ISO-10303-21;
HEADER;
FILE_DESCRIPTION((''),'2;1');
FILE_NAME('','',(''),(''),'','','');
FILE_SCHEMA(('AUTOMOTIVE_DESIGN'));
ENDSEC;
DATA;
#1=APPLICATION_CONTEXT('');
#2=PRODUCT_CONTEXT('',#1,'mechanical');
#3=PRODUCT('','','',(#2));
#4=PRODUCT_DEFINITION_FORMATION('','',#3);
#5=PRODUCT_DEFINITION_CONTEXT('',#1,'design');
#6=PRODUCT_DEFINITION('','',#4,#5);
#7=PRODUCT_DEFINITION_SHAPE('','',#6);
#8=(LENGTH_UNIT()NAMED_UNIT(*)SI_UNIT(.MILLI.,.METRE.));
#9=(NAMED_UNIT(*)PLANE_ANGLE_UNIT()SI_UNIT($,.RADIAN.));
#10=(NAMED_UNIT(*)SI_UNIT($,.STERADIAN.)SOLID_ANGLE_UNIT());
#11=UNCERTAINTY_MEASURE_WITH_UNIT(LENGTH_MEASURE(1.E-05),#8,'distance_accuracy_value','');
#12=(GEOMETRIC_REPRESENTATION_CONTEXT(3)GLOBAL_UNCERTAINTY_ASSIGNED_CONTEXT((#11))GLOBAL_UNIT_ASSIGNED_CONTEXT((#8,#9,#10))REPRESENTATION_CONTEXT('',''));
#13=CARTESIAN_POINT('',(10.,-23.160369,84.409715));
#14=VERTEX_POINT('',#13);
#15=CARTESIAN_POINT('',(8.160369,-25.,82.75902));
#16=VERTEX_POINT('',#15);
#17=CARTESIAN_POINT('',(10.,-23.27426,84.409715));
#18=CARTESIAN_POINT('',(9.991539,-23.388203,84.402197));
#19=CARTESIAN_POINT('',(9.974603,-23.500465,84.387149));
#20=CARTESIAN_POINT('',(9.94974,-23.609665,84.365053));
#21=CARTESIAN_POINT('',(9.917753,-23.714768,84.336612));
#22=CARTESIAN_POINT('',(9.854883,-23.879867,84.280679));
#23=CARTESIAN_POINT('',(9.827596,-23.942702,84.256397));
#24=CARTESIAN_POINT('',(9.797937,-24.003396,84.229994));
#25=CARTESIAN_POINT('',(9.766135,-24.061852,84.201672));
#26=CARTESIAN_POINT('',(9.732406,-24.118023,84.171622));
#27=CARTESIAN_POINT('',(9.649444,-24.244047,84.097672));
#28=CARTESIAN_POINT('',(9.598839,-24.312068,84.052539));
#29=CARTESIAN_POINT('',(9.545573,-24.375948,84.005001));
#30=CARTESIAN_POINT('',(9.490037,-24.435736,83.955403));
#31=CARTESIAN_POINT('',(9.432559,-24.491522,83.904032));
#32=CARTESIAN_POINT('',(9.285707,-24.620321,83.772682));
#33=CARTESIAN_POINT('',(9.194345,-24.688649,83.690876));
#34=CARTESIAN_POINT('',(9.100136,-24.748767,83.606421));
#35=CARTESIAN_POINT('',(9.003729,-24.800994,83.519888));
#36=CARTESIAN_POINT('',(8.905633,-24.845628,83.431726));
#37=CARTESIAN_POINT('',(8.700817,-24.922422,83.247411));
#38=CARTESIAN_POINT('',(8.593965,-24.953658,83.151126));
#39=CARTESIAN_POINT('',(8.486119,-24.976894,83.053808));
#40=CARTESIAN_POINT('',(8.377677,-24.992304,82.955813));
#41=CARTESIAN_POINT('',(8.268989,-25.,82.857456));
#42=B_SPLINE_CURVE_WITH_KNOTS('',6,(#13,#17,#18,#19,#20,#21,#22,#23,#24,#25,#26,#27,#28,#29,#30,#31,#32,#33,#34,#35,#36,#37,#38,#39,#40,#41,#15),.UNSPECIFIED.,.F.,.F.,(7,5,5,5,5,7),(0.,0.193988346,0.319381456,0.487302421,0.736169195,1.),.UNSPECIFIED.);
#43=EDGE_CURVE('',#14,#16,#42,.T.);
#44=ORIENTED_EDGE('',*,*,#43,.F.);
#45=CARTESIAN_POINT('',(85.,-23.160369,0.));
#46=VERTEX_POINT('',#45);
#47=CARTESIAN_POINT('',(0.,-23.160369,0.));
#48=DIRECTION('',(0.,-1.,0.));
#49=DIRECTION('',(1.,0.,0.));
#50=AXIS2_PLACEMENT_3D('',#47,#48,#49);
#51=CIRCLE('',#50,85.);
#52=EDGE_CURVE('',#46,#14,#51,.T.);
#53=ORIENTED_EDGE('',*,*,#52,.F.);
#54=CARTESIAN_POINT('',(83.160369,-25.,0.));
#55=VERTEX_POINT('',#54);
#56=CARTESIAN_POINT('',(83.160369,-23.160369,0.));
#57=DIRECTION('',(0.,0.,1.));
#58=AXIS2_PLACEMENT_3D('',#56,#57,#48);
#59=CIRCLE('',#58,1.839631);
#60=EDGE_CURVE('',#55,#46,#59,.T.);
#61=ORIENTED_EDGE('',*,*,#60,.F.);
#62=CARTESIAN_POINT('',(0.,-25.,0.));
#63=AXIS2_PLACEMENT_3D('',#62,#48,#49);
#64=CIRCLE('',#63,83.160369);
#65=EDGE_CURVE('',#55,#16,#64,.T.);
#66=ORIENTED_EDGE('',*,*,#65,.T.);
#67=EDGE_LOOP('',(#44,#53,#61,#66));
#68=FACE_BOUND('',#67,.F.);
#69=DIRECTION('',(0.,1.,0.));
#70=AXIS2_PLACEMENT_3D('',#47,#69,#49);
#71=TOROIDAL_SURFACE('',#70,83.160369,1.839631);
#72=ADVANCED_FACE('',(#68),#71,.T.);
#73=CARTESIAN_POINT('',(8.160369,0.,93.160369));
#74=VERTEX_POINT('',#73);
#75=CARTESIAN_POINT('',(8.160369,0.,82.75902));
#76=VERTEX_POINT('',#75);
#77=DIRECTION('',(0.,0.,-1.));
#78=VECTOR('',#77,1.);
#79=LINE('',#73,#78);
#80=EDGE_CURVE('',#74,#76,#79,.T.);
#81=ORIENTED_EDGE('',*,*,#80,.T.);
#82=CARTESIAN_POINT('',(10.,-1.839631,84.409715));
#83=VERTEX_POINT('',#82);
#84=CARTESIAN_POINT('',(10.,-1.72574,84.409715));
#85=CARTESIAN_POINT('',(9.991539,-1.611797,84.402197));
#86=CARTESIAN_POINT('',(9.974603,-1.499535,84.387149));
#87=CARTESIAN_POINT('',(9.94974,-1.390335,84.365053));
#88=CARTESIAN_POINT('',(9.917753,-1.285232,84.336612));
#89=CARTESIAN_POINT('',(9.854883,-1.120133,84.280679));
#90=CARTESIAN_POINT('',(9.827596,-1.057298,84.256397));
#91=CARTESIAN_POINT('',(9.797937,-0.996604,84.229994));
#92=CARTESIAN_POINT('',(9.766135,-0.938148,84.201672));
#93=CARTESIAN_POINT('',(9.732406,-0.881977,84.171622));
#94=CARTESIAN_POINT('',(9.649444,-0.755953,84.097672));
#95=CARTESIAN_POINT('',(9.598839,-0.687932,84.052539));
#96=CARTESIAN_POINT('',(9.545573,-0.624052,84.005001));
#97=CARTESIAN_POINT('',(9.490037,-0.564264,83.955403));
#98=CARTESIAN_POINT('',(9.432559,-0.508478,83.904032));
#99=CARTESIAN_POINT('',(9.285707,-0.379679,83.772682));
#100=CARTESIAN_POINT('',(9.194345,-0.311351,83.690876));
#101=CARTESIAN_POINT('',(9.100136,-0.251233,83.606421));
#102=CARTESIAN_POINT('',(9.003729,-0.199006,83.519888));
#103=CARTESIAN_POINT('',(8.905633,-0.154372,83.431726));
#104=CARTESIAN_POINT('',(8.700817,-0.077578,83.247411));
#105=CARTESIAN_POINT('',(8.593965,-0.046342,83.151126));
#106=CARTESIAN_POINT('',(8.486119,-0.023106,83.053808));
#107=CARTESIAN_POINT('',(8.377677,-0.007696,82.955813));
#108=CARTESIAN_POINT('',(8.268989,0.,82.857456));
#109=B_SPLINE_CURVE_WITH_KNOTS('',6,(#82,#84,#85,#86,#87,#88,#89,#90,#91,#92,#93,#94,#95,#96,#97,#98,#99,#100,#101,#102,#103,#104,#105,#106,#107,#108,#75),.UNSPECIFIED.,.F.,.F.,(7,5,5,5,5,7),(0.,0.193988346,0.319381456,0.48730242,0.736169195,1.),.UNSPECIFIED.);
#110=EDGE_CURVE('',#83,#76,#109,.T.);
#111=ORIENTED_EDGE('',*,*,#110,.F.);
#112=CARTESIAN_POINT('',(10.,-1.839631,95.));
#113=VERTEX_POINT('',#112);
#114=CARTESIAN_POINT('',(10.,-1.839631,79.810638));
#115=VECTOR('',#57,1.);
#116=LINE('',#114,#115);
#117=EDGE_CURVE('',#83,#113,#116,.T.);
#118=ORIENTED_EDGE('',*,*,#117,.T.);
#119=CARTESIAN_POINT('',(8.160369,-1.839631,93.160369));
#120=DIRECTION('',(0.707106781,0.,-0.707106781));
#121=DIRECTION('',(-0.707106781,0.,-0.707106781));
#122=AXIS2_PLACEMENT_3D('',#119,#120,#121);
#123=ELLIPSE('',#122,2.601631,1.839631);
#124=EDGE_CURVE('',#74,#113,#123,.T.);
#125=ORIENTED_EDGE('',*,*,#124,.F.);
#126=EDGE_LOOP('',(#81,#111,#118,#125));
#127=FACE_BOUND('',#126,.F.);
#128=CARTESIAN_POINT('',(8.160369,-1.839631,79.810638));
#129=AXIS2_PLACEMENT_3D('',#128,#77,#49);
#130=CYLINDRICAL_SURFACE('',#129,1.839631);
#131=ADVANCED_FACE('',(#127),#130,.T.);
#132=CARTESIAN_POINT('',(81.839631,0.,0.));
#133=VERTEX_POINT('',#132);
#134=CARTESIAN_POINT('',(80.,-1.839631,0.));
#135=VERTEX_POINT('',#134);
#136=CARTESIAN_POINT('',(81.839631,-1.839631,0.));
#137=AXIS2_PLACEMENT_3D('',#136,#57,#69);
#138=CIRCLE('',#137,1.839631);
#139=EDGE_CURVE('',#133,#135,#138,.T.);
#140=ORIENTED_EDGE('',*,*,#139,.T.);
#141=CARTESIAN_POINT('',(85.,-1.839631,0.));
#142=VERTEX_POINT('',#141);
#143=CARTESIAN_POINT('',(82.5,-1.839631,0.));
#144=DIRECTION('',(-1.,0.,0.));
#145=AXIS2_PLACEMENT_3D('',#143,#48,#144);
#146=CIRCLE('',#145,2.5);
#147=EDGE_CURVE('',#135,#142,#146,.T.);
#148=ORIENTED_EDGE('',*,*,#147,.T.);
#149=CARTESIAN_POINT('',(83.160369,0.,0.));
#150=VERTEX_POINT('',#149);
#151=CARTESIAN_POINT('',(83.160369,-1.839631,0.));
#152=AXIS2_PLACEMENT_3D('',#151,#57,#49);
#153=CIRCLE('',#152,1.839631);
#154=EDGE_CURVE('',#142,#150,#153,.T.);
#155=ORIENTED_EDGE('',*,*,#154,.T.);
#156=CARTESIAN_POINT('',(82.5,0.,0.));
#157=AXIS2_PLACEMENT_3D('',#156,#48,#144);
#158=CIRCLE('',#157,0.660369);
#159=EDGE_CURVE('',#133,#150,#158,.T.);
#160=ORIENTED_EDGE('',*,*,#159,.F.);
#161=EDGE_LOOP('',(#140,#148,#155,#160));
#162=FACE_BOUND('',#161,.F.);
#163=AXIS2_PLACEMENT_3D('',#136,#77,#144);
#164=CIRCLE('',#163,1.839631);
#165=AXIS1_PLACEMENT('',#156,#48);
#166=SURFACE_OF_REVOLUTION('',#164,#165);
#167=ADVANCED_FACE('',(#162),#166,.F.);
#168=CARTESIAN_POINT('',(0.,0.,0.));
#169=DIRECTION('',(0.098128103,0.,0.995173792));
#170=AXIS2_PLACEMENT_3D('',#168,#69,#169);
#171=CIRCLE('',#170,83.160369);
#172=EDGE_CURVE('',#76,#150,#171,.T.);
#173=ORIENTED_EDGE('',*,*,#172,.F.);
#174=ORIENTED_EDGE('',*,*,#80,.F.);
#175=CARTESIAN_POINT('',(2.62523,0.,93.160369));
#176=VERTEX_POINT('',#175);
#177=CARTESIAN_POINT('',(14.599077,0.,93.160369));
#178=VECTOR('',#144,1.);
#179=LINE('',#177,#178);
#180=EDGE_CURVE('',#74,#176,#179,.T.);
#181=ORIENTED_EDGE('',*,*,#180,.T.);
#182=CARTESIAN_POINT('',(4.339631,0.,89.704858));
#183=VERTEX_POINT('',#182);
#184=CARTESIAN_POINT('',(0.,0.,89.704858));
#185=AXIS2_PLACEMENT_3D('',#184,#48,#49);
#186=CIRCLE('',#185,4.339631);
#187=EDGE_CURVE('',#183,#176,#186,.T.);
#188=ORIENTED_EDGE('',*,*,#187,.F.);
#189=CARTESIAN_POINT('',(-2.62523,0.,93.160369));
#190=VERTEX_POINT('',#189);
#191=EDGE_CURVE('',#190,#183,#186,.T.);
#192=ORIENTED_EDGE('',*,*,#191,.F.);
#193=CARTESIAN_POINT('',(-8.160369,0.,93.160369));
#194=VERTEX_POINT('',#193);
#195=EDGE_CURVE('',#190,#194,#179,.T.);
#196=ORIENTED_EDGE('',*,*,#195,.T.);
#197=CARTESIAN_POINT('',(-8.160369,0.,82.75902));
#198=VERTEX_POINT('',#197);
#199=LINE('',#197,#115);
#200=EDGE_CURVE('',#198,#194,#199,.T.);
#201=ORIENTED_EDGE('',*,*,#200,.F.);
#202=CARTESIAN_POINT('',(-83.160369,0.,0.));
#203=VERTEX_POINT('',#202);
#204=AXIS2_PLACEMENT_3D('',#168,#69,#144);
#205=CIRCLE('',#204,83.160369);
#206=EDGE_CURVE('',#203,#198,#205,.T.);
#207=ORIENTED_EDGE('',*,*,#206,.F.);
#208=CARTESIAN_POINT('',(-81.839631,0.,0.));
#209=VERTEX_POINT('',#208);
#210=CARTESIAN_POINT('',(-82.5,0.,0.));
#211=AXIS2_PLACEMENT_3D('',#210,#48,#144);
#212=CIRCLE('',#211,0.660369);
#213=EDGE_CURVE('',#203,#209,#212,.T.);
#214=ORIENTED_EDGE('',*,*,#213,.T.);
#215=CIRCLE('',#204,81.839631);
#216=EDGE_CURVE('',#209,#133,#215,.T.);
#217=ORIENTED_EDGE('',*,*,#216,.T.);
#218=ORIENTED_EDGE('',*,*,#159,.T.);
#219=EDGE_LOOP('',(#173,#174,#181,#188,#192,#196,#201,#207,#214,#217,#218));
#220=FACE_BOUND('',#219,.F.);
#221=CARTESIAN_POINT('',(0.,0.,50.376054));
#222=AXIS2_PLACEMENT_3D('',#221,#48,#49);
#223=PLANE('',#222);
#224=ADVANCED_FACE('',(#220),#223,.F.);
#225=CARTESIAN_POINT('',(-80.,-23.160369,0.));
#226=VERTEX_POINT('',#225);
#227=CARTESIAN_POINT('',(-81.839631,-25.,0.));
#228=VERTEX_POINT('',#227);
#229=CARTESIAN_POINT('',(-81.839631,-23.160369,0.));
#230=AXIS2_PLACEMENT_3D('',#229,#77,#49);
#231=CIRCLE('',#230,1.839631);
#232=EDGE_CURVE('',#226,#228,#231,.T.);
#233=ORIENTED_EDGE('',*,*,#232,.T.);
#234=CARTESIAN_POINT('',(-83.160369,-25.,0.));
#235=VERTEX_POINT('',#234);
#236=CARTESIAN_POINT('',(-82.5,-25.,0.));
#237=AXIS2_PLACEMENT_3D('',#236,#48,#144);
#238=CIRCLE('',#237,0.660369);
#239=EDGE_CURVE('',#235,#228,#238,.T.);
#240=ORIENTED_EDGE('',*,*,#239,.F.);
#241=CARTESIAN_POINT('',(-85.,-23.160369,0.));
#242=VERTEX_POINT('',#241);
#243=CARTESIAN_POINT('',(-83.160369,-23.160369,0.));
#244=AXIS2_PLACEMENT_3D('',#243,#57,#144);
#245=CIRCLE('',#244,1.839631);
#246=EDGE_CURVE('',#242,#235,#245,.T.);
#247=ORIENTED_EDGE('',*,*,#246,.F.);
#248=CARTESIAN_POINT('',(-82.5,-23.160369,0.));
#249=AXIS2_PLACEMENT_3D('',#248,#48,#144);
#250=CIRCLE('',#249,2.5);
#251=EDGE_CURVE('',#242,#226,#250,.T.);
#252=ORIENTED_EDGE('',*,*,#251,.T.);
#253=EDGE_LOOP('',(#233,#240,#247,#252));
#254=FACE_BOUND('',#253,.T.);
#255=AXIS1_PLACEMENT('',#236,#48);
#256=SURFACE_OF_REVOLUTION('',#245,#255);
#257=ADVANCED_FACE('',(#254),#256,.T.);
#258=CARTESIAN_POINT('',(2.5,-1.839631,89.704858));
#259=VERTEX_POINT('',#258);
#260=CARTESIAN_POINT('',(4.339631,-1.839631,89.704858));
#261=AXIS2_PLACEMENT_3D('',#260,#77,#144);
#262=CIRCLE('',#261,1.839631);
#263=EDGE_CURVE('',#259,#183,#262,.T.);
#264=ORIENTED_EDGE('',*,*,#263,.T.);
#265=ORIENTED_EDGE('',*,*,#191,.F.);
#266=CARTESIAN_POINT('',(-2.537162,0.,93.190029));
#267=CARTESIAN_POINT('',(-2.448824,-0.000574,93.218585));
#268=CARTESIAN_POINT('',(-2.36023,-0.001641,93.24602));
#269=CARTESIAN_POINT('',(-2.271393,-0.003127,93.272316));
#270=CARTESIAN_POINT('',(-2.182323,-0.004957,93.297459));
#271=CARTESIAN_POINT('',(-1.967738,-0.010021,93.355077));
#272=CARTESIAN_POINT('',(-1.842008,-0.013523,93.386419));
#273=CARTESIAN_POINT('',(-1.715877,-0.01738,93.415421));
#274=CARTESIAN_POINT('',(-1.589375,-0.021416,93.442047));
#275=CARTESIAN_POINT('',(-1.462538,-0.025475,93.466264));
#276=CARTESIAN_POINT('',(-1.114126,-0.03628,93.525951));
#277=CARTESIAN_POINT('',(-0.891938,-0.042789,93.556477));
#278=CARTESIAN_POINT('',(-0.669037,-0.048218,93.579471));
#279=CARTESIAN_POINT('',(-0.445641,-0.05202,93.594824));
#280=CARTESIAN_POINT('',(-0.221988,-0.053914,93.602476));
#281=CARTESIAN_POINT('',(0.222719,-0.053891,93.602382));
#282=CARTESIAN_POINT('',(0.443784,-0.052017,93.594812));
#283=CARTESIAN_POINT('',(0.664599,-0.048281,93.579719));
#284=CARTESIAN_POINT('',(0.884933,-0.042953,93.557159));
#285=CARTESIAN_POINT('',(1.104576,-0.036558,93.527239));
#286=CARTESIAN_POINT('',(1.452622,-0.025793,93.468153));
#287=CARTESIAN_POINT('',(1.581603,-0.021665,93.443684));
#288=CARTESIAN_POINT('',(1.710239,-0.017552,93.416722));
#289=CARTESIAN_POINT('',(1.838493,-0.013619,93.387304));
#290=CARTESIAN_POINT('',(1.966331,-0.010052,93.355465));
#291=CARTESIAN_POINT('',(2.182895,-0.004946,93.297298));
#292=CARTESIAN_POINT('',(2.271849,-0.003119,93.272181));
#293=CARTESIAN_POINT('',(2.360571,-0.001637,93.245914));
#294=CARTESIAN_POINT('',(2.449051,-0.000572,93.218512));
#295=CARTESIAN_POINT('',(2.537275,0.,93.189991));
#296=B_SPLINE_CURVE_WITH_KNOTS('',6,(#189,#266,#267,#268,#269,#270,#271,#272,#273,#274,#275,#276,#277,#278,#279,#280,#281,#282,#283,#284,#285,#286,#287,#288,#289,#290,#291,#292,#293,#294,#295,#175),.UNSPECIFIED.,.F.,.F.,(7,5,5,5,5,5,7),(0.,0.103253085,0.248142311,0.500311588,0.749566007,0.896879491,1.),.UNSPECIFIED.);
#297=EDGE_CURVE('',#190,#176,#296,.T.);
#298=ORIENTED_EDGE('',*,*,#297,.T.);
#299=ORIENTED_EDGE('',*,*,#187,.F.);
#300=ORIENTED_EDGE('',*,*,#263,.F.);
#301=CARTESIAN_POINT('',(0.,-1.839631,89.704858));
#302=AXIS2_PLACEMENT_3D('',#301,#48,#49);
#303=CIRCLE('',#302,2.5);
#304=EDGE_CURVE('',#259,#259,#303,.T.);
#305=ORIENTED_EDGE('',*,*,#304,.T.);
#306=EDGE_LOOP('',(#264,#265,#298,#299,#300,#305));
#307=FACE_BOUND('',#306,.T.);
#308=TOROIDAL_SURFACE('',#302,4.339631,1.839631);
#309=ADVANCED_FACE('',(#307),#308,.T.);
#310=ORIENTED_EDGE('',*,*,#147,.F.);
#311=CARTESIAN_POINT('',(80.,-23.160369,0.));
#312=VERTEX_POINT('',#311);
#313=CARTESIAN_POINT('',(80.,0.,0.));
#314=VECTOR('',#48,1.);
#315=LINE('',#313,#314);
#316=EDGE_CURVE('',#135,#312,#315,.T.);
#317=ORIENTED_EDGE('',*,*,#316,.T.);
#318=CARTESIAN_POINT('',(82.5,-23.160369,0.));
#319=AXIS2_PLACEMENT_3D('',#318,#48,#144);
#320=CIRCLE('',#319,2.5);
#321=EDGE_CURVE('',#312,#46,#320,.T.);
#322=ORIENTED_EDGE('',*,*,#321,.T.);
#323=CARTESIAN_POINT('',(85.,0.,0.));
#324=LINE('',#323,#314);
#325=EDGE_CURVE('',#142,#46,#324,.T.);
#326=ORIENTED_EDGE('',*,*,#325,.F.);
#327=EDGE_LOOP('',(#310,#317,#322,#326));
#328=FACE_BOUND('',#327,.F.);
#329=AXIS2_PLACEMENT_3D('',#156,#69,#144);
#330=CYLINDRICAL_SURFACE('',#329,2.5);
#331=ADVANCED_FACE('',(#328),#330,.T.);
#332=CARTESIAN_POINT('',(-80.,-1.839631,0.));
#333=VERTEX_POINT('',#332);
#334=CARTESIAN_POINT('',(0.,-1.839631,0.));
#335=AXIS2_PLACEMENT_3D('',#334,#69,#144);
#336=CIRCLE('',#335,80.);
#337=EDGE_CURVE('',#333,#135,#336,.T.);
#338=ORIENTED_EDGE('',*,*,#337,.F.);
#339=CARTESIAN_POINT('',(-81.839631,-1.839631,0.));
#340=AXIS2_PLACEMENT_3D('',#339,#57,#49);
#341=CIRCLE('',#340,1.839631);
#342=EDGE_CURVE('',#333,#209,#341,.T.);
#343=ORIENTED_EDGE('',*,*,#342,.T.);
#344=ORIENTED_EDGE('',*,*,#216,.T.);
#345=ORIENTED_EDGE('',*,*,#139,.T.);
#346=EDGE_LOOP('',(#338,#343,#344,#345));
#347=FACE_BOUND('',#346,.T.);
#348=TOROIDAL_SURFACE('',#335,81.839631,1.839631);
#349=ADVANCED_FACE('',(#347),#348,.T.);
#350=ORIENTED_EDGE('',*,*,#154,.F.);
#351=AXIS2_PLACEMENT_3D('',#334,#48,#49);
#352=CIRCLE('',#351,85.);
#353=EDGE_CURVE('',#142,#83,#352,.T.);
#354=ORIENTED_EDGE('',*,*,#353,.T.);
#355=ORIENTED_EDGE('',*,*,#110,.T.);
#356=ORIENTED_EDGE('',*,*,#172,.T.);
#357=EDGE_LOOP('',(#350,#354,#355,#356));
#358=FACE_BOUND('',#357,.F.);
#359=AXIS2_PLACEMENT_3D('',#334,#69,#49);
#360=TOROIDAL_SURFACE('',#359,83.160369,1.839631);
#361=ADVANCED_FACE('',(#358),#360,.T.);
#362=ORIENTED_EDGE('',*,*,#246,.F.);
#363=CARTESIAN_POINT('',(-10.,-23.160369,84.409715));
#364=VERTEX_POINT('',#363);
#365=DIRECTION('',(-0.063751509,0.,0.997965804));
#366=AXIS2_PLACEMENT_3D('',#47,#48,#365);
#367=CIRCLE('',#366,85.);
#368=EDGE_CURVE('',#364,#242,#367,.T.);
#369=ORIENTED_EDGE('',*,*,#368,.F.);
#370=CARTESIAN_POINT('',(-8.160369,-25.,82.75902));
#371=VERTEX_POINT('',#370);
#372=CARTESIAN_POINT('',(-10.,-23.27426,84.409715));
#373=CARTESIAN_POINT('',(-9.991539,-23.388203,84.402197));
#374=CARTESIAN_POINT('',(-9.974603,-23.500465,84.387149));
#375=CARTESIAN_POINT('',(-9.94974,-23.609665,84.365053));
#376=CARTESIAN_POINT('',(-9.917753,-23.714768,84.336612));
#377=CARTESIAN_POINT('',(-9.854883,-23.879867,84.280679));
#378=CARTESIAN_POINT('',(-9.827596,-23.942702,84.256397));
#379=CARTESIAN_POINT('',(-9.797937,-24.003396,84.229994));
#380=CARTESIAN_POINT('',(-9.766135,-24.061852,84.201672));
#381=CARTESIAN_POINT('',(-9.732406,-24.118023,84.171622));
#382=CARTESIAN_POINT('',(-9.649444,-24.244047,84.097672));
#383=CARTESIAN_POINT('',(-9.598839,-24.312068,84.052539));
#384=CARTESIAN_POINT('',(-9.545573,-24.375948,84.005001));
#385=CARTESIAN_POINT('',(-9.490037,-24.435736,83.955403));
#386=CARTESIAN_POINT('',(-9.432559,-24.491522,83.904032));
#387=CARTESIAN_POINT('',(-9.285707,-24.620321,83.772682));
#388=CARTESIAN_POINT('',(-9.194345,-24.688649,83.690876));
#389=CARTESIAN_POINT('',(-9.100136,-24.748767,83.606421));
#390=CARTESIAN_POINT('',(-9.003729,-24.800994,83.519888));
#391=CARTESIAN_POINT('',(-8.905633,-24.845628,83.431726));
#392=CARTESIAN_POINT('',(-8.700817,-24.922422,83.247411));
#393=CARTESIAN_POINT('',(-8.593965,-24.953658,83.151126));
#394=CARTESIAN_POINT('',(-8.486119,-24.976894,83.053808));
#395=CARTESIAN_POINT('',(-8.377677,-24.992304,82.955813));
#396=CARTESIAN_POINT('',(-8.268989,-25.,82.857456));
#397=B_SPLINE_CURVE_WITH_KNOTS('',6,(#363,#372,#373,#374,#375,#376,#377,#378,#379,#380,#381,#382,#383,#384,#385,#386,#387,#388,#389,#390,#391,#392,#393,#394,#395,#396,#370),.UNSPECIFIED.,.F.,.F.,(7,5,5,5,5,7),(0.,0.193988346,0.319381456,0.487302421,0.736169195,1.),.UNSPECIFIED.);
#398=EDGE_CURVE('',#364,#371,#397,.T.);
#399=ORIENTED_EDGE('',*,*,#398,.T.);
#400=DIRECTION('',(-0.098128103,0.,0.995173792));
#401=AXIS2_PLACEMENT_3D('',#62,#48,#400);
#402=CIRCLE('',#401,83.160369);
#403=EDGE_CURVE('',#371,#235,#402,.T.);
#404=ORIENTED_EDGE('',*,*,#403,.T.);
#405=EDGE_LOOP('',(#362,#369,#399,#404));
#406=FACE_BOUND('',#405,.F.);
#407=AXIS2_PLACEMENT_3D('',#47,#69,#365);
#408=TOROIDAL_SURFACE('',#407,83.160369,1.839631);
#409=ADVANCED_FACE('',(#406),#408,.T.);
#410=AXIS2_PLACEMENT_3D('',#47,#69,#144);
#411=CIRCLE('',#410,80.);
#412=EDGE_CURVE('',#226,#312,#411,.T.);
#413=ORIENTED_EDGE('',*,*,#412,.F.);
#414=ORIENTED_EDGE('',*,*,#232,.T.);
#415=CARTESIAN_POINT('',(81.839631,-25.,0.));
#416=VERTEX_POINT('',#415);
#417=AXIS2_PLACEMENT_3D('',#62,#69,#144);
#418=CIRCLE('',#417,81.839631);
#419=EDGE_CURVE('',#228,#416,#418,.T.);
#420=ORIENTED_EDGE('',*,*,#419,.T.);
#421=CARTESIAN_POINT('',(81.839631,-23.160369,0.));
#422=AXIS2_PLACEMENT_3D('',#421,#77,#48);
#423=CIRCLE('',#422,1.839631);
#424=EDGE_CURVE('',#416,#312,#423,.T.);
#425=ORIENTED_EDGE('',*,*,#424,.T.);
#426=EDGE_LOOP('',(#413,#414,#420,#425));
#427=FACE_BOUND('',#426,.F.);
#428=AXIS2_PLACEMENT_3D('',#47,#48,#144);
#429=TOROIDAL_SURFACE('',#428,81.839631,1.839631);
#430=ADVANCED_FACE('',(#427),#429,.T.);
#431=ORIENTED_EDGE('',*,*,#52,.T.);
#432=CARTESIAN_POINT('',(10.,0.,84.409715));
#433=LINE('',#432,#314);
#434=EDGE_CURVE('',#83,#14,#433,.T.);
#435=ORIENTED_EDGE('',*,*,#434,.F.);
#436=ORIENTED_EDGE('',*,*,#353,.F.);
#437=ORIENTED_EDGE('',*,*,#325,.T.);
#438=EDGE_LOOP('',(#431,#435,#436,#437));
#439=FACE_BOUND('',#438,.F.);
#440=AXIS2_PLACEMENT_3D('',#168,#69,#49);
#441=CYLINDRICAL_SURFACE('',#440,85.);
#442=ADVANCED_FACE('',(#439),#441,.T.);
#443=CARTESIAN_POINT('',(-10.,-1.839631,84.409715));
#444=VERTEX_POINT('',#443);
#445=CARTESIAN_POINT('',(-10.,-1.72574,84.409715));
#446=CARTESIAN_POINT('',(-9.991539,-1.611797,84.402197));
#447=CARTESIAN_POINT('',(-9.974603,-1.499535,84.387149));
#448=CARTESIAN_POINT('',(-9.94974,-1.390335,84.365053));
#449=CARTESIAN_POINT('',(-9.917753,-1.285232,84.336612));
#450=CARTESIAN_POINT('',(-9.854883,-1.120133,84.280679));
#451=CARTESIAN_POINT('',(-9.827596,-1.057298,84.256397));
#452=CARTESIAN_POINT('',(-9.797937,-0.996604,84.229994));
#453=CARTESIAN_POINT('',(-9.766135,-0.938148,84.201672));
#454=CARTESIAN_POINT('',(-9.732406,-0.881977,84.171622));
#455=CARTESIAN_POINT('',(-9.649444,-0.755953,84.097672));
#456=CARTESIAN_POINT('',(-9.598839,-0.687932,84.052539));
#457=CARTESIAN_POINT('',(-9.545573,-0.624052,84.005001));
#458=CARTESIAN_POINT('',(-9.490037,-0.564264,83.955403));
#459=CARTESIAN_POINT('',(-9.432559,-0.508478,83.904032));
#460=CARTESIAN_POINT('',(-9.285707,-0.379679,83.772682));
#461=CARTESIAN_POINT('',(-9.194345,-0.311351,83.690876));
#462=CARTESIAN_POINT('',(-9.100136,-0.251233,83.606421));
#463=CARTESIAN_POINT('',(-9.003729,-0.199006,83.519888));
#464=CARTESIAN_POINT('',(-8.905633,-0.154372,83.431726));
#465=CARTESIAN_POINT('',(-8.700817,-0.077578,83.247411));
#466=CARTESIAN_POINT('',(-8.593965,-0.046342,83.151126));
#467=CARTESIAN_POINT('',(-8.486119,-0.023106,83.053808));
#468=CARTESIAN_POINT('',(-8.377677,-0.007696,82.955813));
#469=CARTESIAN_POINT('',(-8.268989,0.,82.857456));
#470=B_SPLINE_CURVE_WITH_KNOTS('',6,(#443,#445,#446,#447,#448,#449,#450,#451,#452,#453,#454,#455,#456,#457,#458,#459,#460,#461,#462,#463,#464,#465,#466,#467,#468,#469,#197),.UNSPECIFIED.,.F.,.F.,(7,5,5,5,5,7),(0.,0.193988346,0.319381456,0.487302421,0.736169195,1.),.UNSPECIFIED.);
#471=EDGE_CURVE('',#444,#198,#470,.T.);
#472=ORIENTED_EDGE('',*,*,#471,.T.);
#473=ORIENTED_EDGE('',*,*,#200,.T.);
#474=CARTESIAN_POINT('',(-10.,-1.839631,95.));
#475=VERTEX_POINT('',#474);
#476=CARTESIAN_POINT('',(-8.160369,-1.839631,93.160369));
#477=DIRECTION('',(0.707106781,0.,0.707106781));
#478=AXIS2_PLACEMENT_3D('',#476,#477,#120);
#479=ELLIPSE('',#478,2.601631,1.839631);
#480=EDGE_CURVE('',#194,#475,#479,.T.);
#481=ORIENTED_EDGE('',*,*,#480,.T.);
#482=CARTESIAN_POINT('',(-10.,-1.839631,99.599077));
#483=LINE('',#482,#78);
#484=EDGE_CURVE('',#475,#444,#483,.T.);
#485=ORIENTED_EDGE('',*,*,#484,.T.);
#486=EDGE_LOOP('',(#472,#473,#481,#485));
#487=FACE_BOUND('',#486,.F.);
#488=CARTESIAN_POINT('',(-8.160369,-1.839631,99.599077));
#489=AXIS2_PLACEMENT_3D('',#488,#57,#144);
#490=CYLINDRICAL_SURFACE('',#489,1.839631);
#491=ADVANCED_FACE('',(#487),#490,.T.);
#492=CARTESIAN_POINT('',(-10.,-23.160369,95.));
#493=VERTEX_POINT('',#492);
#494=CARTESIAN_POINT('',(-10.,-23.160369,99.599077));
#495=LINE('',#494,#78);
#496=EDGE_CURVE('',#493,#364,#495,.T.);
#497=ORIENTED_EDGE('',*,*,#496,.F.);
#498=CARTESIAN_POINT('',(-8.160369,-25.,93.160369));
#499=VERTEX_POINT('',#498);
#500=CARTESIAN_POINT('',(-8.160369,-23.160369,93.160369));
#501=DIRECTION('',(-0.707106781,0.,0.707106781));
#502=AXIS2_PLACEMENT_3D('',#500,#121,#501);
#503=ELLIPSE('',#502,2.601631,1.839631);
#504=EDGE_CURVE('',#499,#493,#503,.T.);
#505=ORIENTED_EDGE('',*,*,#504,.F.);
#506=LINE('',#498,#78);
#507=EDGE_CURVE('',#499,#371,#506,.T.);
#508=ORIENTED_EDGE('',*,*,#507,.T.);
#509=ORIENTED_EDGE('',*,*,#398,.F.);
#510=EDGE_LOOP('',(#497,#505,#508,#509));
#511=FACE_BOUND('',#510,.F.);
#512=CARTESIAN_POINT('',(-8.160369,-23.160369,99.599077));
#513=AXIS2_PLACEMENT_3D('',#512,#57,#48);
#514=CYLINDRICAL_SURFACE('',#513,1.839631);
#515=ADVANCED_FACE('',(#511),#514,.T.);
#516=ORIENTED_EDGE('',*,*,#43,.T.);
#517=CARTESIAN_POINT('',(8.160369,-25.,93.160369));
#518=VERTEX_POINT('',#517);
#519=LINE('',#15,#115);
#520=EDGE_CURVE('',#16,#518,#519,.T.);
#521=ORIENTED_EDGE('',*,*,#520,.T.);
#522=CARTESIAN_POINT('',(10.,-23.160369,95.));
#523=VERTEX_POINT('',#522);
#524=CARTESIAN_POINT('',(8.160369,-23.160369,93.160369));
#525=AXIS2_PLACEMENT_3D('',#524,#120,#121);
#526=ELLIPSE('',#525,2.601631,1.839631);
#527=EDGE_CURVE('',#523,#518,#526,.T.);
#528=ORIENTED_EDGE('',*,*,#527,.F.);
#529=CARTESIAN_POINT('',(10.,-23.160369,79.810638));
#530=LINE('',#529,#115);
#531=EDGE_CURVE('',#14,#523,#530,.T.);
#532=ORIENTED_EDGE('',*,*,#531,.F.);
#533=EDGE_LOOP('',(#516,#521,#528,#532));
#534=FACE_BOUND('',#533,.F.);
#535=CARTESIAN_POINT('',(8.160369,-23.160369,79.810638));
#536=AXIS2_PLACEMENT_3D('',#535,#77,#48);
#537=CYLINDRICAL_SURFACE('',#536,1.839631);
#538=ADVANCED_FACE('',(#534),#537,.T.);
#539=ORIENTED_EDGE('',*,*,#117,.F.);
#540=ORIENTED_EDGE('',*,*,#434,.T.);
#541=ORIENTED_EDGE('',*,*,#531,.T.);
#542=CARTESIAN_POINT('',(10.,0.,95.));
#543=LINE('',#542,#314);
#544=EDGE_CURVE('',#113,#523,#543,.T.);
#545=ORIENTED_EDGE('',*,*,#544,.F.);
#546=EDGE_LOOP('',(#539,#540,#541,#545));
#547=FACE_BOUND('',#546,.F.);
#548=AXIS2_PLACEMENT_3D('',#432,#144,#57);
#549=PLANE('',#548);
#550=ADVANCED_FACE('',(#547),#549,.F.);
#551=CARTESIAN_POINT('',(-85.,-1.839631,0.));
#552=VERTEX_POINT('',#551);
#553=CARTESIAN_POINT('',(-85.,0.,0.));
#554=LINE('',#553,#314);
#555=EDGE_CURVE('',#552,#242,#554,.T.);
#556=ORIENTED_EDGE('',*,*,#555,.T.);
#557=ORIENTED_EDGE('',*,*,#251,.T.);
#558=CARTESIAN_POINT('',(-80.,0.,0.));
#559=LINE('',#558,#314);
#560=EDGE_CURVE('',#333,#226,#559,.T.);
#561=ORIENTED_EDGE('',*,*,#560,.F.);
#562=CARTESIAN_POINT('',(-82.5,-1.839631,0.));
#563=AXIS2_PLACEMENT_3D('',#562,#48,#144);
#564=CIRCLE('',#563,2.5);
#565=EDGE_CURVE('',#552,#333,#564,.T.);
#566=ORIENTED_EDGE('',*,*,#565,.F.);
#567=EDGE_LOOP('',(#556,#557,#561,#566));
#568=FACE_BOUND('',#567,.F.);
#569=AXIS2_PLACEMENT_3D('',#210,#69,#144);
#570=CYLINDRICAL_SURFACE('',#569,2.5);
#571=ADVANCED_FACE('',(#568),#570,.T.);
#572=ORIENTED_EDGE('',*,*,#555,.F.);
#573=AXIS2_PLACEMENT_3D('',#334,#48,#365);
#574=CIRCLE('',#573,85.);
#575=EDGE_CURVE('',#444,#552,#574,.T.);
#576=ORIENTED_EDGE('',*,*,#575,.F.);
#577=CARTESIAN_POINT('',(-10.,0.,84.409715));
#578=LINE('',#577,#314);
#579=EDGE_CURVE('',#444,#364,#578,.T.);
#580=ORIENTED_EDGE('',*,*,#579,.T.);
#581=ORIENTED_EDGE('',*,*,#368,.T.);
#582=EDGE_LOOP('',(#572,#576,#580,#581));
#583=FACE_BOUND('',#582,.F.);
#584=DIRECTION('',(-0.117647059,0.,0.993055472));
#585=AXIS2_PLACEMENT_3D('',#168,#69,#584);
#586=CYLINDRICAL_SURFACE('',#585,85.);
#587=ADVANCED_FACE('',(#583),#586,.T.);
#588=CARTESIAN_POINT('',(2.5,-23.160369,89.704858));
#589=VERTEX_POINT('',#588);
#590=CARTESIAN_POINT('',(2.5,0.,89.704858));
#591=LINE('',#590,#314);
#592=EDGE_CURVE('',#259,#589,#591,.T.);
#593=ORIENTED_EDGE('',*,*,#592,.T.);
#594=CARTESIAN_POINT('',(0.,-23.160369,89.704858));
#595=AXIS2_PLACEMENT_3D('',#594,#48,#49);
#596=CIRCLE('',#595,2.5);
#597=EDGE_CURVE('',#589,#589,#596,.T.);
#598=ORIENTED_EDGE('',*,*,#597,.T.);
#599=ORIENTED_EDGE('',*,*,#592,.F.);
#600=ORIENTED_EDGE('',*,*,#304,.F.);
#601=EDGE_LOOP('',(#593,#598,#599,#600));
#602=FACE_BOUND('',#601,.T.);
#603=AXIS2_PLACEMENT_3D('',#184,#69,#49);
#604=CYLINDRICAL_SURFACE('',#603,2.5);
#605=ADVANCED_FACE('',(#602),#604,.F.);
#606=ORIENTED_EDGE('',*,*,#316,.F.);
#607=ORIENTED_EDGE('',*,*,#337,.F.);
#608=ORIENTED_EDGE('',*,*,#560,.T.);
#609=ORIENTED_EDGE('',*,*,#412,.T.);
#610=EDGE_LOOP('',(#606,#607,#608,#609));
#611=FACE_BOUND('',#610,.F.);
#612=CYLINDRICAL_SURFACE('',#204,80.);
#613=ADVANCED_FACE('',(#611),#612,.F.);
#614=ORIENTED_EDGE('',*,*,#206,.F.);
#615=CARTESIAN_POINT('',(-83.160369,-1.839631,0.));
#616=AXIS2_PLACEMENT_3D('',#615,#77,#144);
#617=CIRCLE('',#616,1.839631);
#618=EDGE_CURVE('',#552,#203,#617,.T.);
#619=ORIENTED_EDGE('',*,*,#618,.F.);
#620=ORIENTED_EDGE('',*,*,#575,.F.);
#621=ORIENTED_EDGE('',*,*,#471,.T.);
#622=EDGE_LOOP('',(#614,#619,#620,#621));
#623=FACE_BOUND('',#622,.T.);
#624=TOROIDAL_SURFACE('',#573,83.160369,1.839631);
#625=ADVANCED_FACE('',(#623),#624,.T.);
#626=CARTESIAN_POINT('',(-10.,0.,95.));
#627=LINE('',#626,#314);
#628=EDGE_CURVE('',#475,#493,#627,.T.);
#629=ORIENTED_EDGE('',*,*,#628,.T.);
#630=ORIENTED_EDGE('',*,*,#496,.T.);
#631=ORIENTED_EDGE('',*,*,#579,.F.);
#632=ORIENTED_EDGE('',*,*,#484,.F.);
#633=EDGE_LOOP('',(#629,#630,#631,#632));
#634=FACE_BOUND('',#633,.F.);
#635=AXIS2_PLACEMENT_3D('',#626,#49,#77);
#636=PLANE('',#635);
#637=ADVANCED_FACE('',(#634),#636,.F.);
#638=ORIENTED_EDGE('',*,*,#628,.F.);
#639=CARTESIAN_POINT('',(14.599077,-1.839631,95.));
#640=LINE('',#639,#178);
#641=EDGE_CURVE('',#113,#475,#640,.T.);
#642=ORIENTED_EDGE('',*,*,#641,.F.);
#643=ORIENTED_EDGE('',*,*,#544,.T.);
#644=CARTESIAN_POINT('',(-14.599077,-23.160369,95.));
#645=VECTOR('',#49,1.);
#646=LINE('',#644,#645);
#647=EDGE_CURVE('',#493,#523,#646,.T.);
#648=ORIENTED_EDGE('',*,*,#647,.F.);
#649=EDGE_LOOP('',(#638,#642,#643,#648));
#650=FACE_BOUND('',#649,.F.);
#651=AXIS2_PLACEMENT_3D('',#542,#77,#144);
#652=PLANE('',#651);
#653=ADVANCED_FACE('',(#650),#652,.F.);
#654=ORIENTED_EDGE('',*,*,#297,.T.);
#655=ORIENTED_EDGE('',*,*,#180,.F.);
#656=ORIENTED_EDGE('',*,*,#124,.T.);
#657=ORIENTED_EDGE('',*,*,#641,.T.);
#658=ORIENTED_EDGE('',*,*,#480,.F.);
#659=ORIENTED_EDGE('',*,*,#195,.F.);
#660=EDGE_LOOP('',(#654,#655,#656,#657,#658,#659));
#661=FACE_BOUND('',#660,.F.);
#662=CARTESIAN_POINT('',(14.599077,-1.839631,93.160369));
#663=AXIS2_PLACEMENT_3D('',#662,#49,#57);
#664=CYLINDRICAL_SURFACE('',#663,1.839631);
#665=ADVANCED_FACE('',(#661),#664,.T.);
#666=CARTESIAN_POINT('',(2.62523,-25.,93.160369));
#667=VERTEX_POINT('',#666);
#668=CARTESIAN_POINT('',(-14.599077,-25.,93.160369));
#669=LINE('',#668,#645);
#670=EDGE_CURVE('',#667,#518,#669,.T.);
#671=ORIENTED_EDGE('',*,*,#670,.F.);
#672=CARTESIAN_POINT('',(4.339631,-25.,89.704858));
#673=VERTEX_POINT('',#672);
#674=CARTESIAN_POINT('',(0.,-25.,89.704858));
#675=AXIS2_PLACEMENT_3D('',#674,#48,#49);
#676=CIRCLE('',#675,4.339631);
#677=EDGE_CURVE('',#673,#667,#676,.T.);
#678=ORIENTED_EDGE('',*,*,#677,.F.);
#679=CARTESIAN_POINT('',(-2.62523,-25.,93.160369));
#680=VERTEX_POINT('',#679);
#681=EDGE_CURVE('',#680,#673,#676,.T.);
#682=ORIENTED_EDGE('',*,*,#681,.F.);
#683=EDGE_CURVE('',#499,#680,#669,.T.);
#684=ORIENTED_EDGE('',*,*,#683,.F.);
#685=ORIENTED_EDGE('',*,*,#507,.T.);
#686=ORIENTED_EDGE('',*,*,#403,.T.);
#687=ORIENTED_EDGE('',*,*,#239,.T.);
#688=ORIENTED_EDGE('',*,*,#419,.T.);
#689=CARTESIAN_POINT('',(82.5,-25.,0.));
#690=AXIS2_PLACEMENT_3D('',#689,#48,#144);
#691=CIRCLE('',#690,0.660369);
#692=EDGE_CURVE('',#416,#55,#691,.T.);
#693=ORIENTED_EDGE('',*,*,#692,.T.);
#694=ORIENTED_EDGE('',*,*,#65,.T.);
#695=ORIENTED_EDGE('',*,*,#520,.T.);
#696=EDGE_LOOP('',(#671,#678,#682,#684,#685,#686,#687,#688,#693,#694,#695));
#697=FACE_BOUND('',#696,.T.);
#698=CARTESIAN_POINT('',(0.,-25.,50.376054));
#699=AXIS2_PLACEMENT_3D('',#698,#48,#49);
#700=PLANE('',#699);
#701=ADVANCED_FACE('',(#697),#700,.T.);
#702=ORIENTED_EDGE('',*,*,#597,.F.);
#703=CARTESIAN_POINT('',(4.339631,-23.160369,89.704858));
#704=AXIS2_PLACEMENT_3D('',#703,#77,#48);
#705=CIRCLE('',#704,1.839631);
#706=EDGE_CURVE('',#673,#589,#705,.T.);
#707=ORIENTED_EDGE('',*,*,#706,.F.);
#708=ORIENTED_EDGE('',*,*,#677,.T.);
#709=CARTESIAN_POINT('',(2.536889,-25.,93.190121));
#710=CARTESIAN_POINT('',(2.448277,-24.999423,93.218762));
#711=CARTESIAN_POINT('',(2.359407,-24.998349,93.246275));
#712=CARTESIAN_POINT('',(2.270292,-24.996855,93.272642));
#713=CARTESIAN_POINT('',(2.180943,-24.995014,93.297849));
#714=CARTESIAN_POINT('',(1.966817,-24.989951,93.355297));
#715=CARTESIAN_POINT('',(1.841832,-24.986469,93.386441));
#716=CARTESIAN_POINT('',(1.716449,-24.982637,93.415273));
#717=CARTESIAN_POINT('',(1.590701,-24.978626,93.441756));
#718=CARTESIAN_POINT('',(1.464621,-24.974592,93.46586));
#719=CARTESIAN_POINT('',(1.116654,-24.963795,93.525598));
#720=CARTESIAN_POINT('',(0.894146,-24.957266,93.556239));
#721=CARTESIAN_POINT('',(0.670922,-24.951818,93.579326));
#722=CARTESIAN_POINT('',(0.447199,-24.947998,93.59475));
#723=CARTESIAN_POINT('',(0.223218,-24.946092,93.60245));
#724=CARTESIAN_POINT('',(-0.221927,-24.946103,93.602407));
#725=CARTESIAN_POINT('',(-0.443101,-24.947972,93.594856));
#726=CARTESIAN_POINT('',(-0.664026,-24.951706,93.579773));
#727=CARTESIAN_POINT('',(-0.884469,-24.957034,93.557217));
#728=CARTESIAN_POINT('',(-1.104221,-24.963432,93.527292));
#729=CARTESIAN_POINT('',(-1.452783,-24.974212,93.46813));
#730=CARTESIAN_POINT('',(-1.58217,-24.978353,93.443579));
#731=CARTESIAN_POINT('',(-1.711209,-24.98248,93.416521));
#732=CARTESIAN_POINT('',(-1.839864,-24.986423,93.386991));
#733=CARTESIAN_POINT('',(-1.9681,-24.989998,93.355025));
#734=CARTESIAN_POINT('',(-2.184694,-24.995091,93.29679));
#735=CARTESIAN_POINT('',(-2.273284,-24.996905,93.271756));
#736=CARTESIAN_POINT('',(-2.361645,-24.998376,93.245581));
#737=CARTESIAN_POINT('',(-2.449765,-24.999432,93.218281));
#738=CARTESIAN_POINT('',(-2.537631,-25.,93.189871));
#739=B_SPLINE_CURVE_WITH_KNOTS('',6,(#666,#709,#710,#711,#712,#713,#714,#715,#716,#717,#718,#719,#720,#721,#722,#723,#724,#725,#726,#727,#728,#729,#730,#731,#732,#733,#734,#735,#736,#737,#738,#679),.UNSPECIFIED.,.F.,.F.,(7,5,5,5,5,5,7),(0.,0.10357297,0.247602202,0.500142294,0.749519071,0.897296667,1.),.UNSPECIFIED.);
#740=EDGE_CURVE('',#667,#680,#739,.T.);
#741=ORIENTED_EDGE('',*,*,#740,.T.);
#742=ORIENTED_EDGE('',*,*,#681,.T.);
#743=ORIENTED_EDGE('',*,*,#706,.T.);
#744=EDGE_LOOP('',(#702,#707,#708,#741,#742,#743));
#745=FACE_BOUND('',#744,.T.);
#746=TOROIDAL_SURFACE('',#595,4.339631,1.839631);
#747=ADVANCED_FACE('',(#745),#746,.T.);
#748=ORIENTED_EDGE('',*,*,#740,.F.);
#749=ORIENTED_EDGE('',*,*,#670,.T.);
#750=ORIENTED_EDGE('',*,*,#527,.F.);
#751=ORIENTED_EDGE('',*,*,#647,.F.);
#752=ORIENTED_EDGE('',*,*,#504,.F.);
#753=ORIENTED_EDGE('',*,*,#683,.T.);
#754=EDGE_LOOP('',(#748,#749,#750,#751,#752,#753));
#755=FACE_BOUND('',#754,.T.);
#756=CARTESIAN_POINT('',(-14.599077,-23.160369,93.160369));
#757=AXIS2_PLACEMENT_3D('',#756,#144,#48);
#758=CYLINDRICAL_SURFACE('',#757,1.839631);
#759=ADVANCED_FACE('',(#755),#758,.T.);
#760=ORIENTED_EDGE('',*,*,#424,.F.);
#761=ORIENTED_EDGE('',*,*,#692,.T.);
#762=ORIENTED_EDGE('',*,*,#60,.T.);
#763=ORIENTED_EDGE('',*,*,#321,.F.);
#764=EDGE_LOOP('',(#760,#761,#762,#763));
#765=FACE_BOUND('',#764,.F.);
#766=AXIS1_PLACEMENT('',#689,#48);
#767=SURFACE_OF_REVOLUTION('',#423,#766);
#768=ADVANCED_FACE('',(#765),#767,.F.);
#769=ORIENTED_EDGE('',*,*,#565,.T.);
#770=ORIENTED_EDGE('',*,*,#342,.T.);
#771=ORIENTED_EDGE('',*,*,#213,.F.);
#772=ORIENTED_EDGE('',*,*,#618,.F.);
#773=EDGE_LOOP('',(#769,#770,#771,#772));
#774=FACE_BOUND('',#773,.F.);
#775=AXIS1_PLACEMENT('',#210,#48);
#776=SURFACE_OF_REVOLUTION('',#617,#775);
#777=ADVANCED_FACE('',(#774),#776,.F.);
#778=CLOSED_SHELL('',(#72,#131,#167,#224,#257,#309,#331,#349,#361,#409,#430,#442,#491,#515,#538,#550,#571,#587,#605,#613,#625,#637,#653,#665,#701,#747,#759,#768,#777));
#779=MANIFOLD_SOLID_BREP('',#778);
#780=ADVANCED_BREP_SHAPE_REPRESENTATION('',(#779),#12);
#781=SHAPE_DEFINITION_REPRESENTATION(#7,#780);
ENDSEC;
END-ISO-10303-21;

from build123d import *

# Parameters (mm, degrees)
F0_R          = 2.5
F1_DEPTH      = 25
F2_T3_ANGLE   = 180
F2_T6_ANGLE   = 180
F2_T9_ANGLE   = 180
F2_T12_ANGLE  = 86.3448287996
F2_T16_DEPTH  = 19.788438592
F2_S17_R      = 85
F2_T18_DEPTH  = 11
F2_T21_DEPTH  = 29.1981536726
F2_T24_DEPTH  = 19.788438592
F2_S25_R      = 85
F2_T26_DEPTH  = 11
F2_T29_ANGLE  = 86.3448287996
F2_T36_ANGLE  = 180
F2_T39_ANGLE  = 180
F2_T42_ANGLE  = 180
F2_T45_ANGLE  = 86.3448287996
F2_T49_DEPTH  = 19.788438592
F2_S50_R      = 85
F2_T51_DEPTH  = 11
F2_T54_DEPTH  = 29.1981536726
F2_T57_DEPTH  = 19.788438592
F2_S58_R      = 85
F2_T59_DEPTH  = 11
F2_T62_ANGLE  = 86.3448287996
F2_T70_ANGLE  = 86.3448287996
F2_T74_DEPTH  = 19.788438592
F2_S75_R      = 85
F2_T76_DEPTH  = 11
F2_T81_DEPTH  = 19.788438592
F2_S82_R      = 85
F2_T83_DEPTH  = 11
F2_T86_ANGLE  = 86.3448287996
F2_T92_DEPTH  = 19.788438592
F2_S93_R      = 85
F2_T94_DEPTH  = 11
F2_T97_ANGLE  = 86.3448287996
F2_T103_DEPTH = 19.788438592
F2_S104_R     = 85
F2_T105_DEPTH = 11
F2_T108_ANGLE = 86.3448287996


# Not quite as in the source:
# - a fillet or chamfer that OpenCascade refuses, or shapes differently, is made with other operations: its cross-section is extruded or revolved along the edge and cut away or added


with BuildPart() as f1:
    # F0 (on Front) → F1 (new body)
    with BuildSketch(Plane.XZ):
        with BuildLine():
            ThreePointArc((-80, 0), (0, 80), (80, 0))
            ThreePointArc((80, 0), (82.5, -2.5), (85, 0))
            ThreePointArc((85, 0), (63.5413251357, 56.4579489532), (10, 84.4097150807))
            Line((10, 84.4097150807), (10, 95))
            Line((10, 95), (0, 95))
            Line((0, 95), (-10, 95))
            Line((-10, 95), (-10, 84.4097150807))
            ThreePointArc((-10, 84.4097150807), (-63.5413251357, 56.4579489532), (-85, 0))
            ThreePointArc((-85, 0), (-82.5, -2.5), (-80, 0))
        make_face()
        with Locations((0, 89.7048575403)):
            Circle(F0_R, mode=Mode.SUBTRACT)
    extrude(amount=F1_DEPTH)

    # F2: fillet of radius 1.8396307345 on 18 edges, made by hand


with BuildPart() as f2_tool1:
    # F2_s2 → F2_t3 (revolve)
    with BuildSketch(Plane.XY):
        with BuildLine():
            ThreePointArc((-85, -23.1603692655), (-84.4611846327, -24.4611846327), (-83.1603692655, -25))
            Line((-83.1603692655, -25), (-85, -25))
            Line((-85, -25), (-85, -23.1603692655))
        make_face()
    revolve(axis=Axis((-82.5, -25, 0), (0, -1, 0)), revolution_arc=F2_T3_ANGLE)


with BuildPart() as f2_tool4:
    # F2_s5 → F2_t6 (revolve)
    with BuildSketch(Plane.XY):
        with BuildLine():
            ThreePointArc((-81.8396307345, -25), (-80.5388153673, -24.4611846327), (-80, -23.1603692655))
            Line((-80, -23.1603692655), (-80, -25))
            Line((-80, -25), (-81.8396307345, -25))
        make_face()
    revolve(axis=Axis((0, -25, 0), (0, 1, 0)), revolution_arc=F2_T6_ANGLE)


with BuildPart() as f2_tool7:
    # F2_s8 → F2_t9 (revolve)
    with BuildSketch(Plane.XY):
        with BuildLine():
            ThreePointArc((81.8396307345, -25), (80.5388153673, -24.4611846327), (80, -23.1603692655))
            Line((80, -23.1603692655), (80, -25))
            Line((80, -25), (81.8396307345, -25))
        make_face()
    revolve(axis=Axis((82.5, -25, 0), (0, -1, 0)), revolution_arc=F2_T9_ANGLE)


with BuildPart() as f2_tool10:
    # F2_s11 → F2_t12 (revolve)
    with BuildSketch(Plane.XY):
        with BuildLine():
            ThreePointArc((83.1603692655, -25), (84.4611846327, -24.4611846327), (85, -23.1603692655))
            Line((85, -23.1603692655), (85, -25))
            Line((85, -25), (83.1603692655, -25))
        make_face()
    revolve(axis=Axis((0, -25, 0), (0, -1, 0)), revolution_arc=F2_T12_ANGLE)

    split(bisect_by=Plane.YZ.offset(10), keep=Keep.TOP)


with BuildPart() as f2_tool14:
    # F2_s15 → F2_t16 (new body)
    with BuildSketch(Plane.XY.offset(79.8106382443)):
        with BuildLine():
            ThreePointArc((8.1603692655, -25), (9.4611846327, -24.4611846327), (10, -23.1603692655))
            Line((10, -23.1603692655), (10, -25))
            Line((10, -25), (8.1603692655, -25))
        make_face()
    extrude(amount=F2_T16_DEPTH)

    # F2_s17 → F2_t18 (cut, symmetric)
    with BuildSketch(Plane.XZ.offset(24.1)):
        Circle(F2_S17_R)
    extrude(amount=F2_T18_DEPTH, both=True, mode=Mode.SUBTRACT)


with BuildPart() as f2_tool19:
    # F2_s20 → F2_t21 (new body)
    with BuildSketch(Plane.YZ.offset(-14.5990768363)):
        with BuildLine():
            ThreePointArc((-25, 93.1603692655), (-24.4611846327, 94.4611846327), (-23.1603692655, 95))
            Line((-23.1603692655, 95), (-25, 95))
            Line((-25, 95), (-25, 93.1603692655))
        make_face()
    extrude(amount=F2_T21_DEPTH)


with BuildPart() as f2_tool22:
    # F2_s23 → F2_t24 (new body)
    with BuildSketch(Plane.XY.offset(99.5990768363)):
        with BuildLine():
            ThreePointArc((-8.1603692655, -25), (-9.4611846327, -24.4611846327), (-10, -23.1603692655))
            Line((-10, -23.1603692655), (-10, -25))
            Line((-10, -25), (-8.1603692655, -25))
        make_face()
    extrude(amount=-F2_T24_DEPTH)

    # F2_s25 → F2_t26 (cut, symmetric)
    with BuildSketch(Plane.XZ.offset(24.1)):
        Circle(F2_S25_R)
    extrude(amount=F2_T26_DEPTH, both=True, mode=Mode.SUBTRACT)


with BuildPart() as f2_tool27:
    # F2_s28 → F2_t29 (revolve)
    with BuildSketch(Plane(origin=(0, 0, 0), x_dir=(0, 1, 0), z_dir=(0.9979658036, 0, 0.0637515093))):
        with BuildLine():
            ThreePointArc((-25, 83.1603692655), (-24.4611846327, 84.4611846327), (-23.1603692655, 85))
            Line((-23.1603692655, 85), (-25, 85))
            Line((-25, 85), (-25, 83.1603692655))
        make_face()
    revolve(axis=Axis((0, -25, 0), (0, -1, 0)), revolution_arc=F2_T29_ANGLE)

    split(bisect_by=Plane.YZ.offset(-10), keep=Keep.BOTTOM)


with BuildPart() as f2_tool31:
    # F2_s32 → F2_t33 (revolve)
    with BuildSketch(Plane.XY.offset(89.7048575403)):
        with BuildLine():
            ThreePointArc((4.3396307345, -25), (3.0388153673, -24.4611846327), (2.5, -23.1603692655))
            Line((2.5, -23.1603692655), (2.5, -25))
            Line((2.5, -25), (4.3396307345, -25))
        make_face()
    revolve(axis=Axis((0, -25, 89.7048575403), (0, -1, 0)))


with BuildPart() as f2_tool34:
    # F2_s35 → F2_t36 (revolve)
    with BuildSketch(Plane.XY):
        with BuildLine():
            ThreePointArc((-85, -1.8396307345), (-84.4611846327, -0.5388153673), (-83.1603692655, 0))
            Line((-83.1603692655, 0), (-85, 0))
            Line((-85, 0), (-85, -1.8396307345))
        make_face()
    revolve(axis=Axis((-82.5, 0, 0), (0, -1, 0)), revolution_arc=F2_T36_ANGLE)


with BuildPart() as f2_tool37:
    # F2_s38 → F2_t39 (revolve)
    with BuildSketch(Plane.XY):
        with BuildLine():
            ThreePointArc((-81.8396307345, 0), (-80.5388153673, -0.5388153673), (-80, -1.8396307345))
            Line((-80, -1.8396307345), (-80, 0))
            Line((-80, 0), (-81.8396307345, 0))
        make_face()
    revolve(axis=Axis((0, 0, 0), (0, 1, 0)), revolution_arc=F2_T39_ANGLE)


with BuildPart() as f2_tool40:
    # F2_s41 → F2_t42 (revolve)
    with BuildSketch(Plane.XY):
        with BuildLine():
            ThreePointArc((80, -1.8396307345), (80.5388153673, -0.5388153673), (81.8396307345, 0))
            Line((81.8396307345, 0), (80, 0))
            Line((80, 0), (80, -1.8396307345))
        make_face()
    revolve(axis=Axis((82.5, 0, 0), (0, -1, 0)), revolution_arc=F2_T42_ANGLE)


with BuildPart() as f2_tool43:
    # F2_s44 → F2_t45 (revolve)
    with BuildSketch(Plane.XY):
        with BuildLine():
            ThreePointArc((85, -1.8396307345), (84.4611846327, -0.5388153673), (83.1603692655, 0))
            Line((83.1603692655, 0), (85, 0))
            Line((85, 0), (85, -1.8396307345))
        make_face()
    revolve(axis=Axis((0, 0, 0), (0, -1, 0)), revolution_arc=F2_T45_ANGLE)

    split(bisect_by=Plane.YZ.offset(10), keep=Keep.TOP)


with BuildPart() as f2_tool47:
    # F2_s48 → F2_t49 (new body)
    with BuildSketch(Plane.XY.offset(79.8106382443)):
        with BuildLine():
            ThreePointArc((10, -1.8396307345), (9.4611846327, -0.5388153673), (8.1603692655, 0))
            Line((8.1603692655, 0), (10, 0))
            Line((10, 0), (10, -1.8396307345))
        make_face()
    extrude(amount=F2_T49_DEPTH)

    # F2_s50 → F2_t51 (cut, symmetric)
    with BuildSketch(Plane.XZ.offset(0.9)):
        Circle(F2_S50_R)
    extrude(amount=F2_T51_DEPTH, both=True, mode=Mode.SUBTRACT)


with BuildPart() as f2_tool52:
    # F2_s53 → F2_t54 (new body)
    with BuildSketch(Plane.YZ.offset(14.5990768363)):
        with BuildLine():
            ThreePointArc((-1.8396307345, 95), (-0.5388153673, 94.4611846327), (0, 93.1603692655))
            Line((0, 93.1603692655), (0, 95))
            Line((0, 95), (-1.8396307345, 95))
        make_face()
    extrude(amount=-F2_T54_DEPTH)


with BuildPart() as f2_tool55:
    # F2_s56 → F2_t57 (new body)
    with BuildSketch(Plane.XY.offset(99.5990768363)):
        with BuildLine():
            ThreePointArc((-10, -1.8396307345), (-9.4611846327, -0.5388153673), (-8.1603692655, 0))
            Line((-8.1603692655, 0), (-10, 0))
            Line((-10, 0), (-10, -1.8396307345))
        make_face()
    extrude(amount=-F2_T57_DEPTH)

    # F2_s58 → F2_t59 (cut, symmetric)
    with BuildSketch(Plane.XZ.offset(0.9)):
        Circle(F2_S58_R)
    extrude(amount=F2_T59_DEPTH, both=True, mode=Mode.SUBTRACT)


with BuildPart() as f2_tool60:
    # F2_s61 → F2_t62 (revolve)
    with BuildSketch(Plane(origin=(0, 0, 0), x_dir=(0, 1, 0), z_dir=(0.9979658036, 0, 0.0637515093))):
        with BuildLine():
            ThreePointArc((0, 83.1603692655), (-0.5388153673, 84.4611846327), (-1.8396307345, 85))
            Line((-1.8396307345, 85), (0, 85))
            Line((0, 85), (0, 83.1603692655))
        make_face()
    revolve(axis=Axis((0, 0, 0), (0, -1, 0)), revolution_arc=F2_T62_ANGLE)

    split(bisect_by=Plane.YZ.offset(-10), keep=Keep.BOTTOM)


with BuildPart() as f2_tool64:
    # F2_s65 → F2_t66 (revolve)
    with BuildSketch(Plane.XY.offset(89.7048575403)):
        with BuildLine():
            ThreePointArc((2.5, -1.8396307345), (3.0388153673, -0.5388153673), (4.3396307345, 0))
            Line((4.3396307345, 0), (2.5, 0))
            Line((2.5, 0), (2.5, -1.8396307345))
        make_face()
    revolve(axis=Axis((0, 0, 89.7048575403), (0, -1, 0)))


with BuildPart() as f2_tool68:
    # F2_s69 → F2_t70 (revolve)
    with BuildSketch(Plane.XY):
        with BuildLine():
            ThreePointArc((83.1603692655, -25), (84.4611846327, -24.4611846327), (85, -23.1603692655))
            Line((85, -23.1603692655), (85, -25))
            Line((85, -25), (83.1603692655, -25))
        make_face()
    revolve(axis=Axis((0, -25, 0), (0, -1, 0)), revolution_arc=F2_T70_ANGLE)

    split(bisect_by=Plane.YZ.offset(10), keep=Keep.BOTTOM)


with BuildPart() as f2_tool72:
    # F2_s73 → F2_t74 (new body)
    with BuildSketch(Plane.XY.offset(79.8106382443)):
        with BuildLine():
            ThreePointArc((8.1603692655, -25), (9.4611846327, -24.4611846327), (10, -23.1603692655))
            Line((10, -23.1603692655), (10, -25))
            Line((10, -25), (8.1603692655, -25))
        make_face()
    extrude(amount=F2_T74_DEPTH)

    # F2_s75 → F2_t76 (intersect, symmetric)
    with BuildSketch(Plane.XZ.offset(24.1)):
        Circle(F2_S75_R)
    extrude(amount=F2_T76_DEPTH, both=True, mode=Mode.INTERSECT)


with BuildPart() as f2_tool68_1:
    add(f2_tool68.part)

    # F2_t77: intersect F2_tool72
    add(f2_tool72.part, mode=Mode.INTERSECT)


with BuildPart() as f2_tool79:
    # F2_s80 → F2_t81 (new body)
    with BuildSketch(Plane.XY.offset(99.5990768363)):
        with BuildLine():
            ThreePointArc((-8.1603692655, -25), (-9.4611846327, -24.4611846327), (-10, -23.1603692655))
            Line((-10, -23.1603692655), (-10, -25))
            Line((-10, -25), (-8.1603692655, -25))
        make_face()
    extrude(amount=-F2_T81_DEPTH)

    # F2_s82 → F2_t83 (intersect, symmetric)
    with BuildSketch(Plane.XZ.offset(24.1)):
        Circle(F2_S82_R)
    extrude(amount=F2_T83_DEPTH, both=True, mode=Mode.INTERSECT)


with BuildPart() as f2_tool84:
    # F2_s85 → F2_t86 (revolve)
    with BuildSketch(Plane(origin=(0, 0, 0), x_dir=(0, 1, 0), z_dir=(0.9979658036, 0, 0.0637515093))):
        with BuildLine():
            ThreePointArc((-25, 83.1603692655), (-24.4611846327, 84.4611846327), (-23.1603692655, 85))
            Line((-23.1603692655, 85), (-25, 85))
            Line((-25, 85), (-25, 83.1603692655))
        make_face()
    revolve(axis=Axis((0, -25, 0), (0, -1, 0)), revolution_arc=F2_T86_ANGLE)

    split(bisect_by=Plane.YZ.offset(-10), keep=Keep.TOP)


with BuildPart() as f2_tool79_1:
    add(f2_tool79.part)

    # F2_t88: intersect F2_tool84
    add(f2_tool84.part, mode=Mode.INTERSECT)


with BuildPart() as f2_tool90:
    # F2_s91 → F2_t92 (new body)
    with BuildSketch(Plane.XY.offset(79.8106382443)):
        with BuildLine():
            ThreePointArc((10, -1.8396307345), (9.4611846327, -0.5388153673), (8.1603692655, 0))
            Line((8.1603692655, 0), (10, 0))
            Line((10, 0), (10, -1.8396307345))
        make_face()
    extrude(amount=F2_T92_DEPTH)

    # F2_s93 → F2_t94 (intersect, symmetric)
    with BuildSketch(Plane.XZ.offset(0.9)):
        Circle(F2_S93_R)
    extrude(amount=F2_T94_DEPTH, both=True, mode=Mode.INTERSECT)


with BuildPart() as f2_tool95:
    # F2_s96 → F2_t97 (revolve)
    with BuildSketch(Plane.XY):
        with BuildLine():
            ThreePointArc((85, -1.8396307345), (84.4611846327, -0.5388153673), (83.1603692655, 0))
            Line((83.1603692655, 0), (85, 0))
            Line((85, 0), (85, -1.8396307345))
        make_face()
    revolve(axis=Axis((0, 0, 0), (0, -1, 0)), revolution_arc=F2_T97_ANGLE)

    split(bisect_by=Plane.YZ.offset(10), keep=Keep.BOTTOM)


with BuildPart() as f2_tool90_1:
    add(f2_tool90.part)

    # F2_t99: intersect F2_tool95
    add(f2_tool95.part, mode=Mode.INTERSECT)


with BuildPart() as f2_tool101:
    # F2_s102 → F2_t103 (new body)
    with BuildSketch(Plane.XY.offset(99.5990768363)):
        with BuildLine():
            ThreePointArc((-10, -1.8396307345), (-9.4611846327, -0.5388153673), (-8.1603692655, 0))
            Line((-8.1603692655, 0), (-10, 0))
            Line((-10, 0), (-10, -1.8396307345))
        make_face()
    extrude(amount=-F2_T103_DEPTH)

    # F2_s104 → F2_t105 (intersect, symmetric)
    with BuildSketch(Plane.XZ.offset(0.9)):
        Circle(F2_S104_R)
    extrude(amount=F2_T105_DEPTH, both=True, mode=Mode.INTERSECT)


with BuildPart() as f2_tool106:
    # F2_s107 → F2_t108 (revolve)
    with BuildSketch(Plane(origin=(0, 0, 0), x_dir=(0, 1, 0), z_dir=(0.9979658036, 0, 0.0637515093))):
        with BuildLine():
            ThreePointArc((0, 83.1603692655), (-0.5388153673, 84.4611846327), (-1.8396307345, 85))
            Line((-1.8396307345, 85), (0, 85))
            Line((0, 85), (0, 83.1603692655))
        make_face()
    revolve(axis=Axis((0, 0, 0), (0, -1, 0)), revolution_arc=F2_T108_ANGLE)

    split(bisect_by=Plane.YZ.offset(-10), keep=Keep.TOP)


with BuildPart() as f2_tool101_1:
    add(f2_tool101.part)

    # F2_t110: intersect F2_tool106
    add(f2_tool106.part, mode=Mode.INTERSECT)


with BuildPart() as f1_1:
    add(f1.part)

    # F2_t111: cut F2_tool1, F2_tool4, F2_tool7, F2_tool10, F2_tool14, F2_tool19, F2_tool22, F2_tool27, F2_tool31, F2_tool34, F2_tool37, F2_tool40, F2_tool43, F2_tool47, F2_tool52, F2_tool55, F2_tool60, F2_tool64, F2_tool68, F2_tool79, F2_tool90, F2_tool101
    add([f2_tool1.part, f2_tool4.part, f2_tool7.part, f2_tool10.part, f2_tool14.part, f2_tool19.part, f2_tool22.part, f2_tool27.part, f2_tool31.part, f2_tool34.part, f2_tool37.part, f2_tool40.part, f2_tool43.part, f2_tool47.part, f2_tool52.part, f2_tool55.part, f2_tool60.part, f2_tool64.part, f2_tool68_1.part, f2_tool79_1.part, f2_tool90_1.part, f2_tool101_1.part], mode=Mode.SUBTRACT)


solid = f1_1.part
